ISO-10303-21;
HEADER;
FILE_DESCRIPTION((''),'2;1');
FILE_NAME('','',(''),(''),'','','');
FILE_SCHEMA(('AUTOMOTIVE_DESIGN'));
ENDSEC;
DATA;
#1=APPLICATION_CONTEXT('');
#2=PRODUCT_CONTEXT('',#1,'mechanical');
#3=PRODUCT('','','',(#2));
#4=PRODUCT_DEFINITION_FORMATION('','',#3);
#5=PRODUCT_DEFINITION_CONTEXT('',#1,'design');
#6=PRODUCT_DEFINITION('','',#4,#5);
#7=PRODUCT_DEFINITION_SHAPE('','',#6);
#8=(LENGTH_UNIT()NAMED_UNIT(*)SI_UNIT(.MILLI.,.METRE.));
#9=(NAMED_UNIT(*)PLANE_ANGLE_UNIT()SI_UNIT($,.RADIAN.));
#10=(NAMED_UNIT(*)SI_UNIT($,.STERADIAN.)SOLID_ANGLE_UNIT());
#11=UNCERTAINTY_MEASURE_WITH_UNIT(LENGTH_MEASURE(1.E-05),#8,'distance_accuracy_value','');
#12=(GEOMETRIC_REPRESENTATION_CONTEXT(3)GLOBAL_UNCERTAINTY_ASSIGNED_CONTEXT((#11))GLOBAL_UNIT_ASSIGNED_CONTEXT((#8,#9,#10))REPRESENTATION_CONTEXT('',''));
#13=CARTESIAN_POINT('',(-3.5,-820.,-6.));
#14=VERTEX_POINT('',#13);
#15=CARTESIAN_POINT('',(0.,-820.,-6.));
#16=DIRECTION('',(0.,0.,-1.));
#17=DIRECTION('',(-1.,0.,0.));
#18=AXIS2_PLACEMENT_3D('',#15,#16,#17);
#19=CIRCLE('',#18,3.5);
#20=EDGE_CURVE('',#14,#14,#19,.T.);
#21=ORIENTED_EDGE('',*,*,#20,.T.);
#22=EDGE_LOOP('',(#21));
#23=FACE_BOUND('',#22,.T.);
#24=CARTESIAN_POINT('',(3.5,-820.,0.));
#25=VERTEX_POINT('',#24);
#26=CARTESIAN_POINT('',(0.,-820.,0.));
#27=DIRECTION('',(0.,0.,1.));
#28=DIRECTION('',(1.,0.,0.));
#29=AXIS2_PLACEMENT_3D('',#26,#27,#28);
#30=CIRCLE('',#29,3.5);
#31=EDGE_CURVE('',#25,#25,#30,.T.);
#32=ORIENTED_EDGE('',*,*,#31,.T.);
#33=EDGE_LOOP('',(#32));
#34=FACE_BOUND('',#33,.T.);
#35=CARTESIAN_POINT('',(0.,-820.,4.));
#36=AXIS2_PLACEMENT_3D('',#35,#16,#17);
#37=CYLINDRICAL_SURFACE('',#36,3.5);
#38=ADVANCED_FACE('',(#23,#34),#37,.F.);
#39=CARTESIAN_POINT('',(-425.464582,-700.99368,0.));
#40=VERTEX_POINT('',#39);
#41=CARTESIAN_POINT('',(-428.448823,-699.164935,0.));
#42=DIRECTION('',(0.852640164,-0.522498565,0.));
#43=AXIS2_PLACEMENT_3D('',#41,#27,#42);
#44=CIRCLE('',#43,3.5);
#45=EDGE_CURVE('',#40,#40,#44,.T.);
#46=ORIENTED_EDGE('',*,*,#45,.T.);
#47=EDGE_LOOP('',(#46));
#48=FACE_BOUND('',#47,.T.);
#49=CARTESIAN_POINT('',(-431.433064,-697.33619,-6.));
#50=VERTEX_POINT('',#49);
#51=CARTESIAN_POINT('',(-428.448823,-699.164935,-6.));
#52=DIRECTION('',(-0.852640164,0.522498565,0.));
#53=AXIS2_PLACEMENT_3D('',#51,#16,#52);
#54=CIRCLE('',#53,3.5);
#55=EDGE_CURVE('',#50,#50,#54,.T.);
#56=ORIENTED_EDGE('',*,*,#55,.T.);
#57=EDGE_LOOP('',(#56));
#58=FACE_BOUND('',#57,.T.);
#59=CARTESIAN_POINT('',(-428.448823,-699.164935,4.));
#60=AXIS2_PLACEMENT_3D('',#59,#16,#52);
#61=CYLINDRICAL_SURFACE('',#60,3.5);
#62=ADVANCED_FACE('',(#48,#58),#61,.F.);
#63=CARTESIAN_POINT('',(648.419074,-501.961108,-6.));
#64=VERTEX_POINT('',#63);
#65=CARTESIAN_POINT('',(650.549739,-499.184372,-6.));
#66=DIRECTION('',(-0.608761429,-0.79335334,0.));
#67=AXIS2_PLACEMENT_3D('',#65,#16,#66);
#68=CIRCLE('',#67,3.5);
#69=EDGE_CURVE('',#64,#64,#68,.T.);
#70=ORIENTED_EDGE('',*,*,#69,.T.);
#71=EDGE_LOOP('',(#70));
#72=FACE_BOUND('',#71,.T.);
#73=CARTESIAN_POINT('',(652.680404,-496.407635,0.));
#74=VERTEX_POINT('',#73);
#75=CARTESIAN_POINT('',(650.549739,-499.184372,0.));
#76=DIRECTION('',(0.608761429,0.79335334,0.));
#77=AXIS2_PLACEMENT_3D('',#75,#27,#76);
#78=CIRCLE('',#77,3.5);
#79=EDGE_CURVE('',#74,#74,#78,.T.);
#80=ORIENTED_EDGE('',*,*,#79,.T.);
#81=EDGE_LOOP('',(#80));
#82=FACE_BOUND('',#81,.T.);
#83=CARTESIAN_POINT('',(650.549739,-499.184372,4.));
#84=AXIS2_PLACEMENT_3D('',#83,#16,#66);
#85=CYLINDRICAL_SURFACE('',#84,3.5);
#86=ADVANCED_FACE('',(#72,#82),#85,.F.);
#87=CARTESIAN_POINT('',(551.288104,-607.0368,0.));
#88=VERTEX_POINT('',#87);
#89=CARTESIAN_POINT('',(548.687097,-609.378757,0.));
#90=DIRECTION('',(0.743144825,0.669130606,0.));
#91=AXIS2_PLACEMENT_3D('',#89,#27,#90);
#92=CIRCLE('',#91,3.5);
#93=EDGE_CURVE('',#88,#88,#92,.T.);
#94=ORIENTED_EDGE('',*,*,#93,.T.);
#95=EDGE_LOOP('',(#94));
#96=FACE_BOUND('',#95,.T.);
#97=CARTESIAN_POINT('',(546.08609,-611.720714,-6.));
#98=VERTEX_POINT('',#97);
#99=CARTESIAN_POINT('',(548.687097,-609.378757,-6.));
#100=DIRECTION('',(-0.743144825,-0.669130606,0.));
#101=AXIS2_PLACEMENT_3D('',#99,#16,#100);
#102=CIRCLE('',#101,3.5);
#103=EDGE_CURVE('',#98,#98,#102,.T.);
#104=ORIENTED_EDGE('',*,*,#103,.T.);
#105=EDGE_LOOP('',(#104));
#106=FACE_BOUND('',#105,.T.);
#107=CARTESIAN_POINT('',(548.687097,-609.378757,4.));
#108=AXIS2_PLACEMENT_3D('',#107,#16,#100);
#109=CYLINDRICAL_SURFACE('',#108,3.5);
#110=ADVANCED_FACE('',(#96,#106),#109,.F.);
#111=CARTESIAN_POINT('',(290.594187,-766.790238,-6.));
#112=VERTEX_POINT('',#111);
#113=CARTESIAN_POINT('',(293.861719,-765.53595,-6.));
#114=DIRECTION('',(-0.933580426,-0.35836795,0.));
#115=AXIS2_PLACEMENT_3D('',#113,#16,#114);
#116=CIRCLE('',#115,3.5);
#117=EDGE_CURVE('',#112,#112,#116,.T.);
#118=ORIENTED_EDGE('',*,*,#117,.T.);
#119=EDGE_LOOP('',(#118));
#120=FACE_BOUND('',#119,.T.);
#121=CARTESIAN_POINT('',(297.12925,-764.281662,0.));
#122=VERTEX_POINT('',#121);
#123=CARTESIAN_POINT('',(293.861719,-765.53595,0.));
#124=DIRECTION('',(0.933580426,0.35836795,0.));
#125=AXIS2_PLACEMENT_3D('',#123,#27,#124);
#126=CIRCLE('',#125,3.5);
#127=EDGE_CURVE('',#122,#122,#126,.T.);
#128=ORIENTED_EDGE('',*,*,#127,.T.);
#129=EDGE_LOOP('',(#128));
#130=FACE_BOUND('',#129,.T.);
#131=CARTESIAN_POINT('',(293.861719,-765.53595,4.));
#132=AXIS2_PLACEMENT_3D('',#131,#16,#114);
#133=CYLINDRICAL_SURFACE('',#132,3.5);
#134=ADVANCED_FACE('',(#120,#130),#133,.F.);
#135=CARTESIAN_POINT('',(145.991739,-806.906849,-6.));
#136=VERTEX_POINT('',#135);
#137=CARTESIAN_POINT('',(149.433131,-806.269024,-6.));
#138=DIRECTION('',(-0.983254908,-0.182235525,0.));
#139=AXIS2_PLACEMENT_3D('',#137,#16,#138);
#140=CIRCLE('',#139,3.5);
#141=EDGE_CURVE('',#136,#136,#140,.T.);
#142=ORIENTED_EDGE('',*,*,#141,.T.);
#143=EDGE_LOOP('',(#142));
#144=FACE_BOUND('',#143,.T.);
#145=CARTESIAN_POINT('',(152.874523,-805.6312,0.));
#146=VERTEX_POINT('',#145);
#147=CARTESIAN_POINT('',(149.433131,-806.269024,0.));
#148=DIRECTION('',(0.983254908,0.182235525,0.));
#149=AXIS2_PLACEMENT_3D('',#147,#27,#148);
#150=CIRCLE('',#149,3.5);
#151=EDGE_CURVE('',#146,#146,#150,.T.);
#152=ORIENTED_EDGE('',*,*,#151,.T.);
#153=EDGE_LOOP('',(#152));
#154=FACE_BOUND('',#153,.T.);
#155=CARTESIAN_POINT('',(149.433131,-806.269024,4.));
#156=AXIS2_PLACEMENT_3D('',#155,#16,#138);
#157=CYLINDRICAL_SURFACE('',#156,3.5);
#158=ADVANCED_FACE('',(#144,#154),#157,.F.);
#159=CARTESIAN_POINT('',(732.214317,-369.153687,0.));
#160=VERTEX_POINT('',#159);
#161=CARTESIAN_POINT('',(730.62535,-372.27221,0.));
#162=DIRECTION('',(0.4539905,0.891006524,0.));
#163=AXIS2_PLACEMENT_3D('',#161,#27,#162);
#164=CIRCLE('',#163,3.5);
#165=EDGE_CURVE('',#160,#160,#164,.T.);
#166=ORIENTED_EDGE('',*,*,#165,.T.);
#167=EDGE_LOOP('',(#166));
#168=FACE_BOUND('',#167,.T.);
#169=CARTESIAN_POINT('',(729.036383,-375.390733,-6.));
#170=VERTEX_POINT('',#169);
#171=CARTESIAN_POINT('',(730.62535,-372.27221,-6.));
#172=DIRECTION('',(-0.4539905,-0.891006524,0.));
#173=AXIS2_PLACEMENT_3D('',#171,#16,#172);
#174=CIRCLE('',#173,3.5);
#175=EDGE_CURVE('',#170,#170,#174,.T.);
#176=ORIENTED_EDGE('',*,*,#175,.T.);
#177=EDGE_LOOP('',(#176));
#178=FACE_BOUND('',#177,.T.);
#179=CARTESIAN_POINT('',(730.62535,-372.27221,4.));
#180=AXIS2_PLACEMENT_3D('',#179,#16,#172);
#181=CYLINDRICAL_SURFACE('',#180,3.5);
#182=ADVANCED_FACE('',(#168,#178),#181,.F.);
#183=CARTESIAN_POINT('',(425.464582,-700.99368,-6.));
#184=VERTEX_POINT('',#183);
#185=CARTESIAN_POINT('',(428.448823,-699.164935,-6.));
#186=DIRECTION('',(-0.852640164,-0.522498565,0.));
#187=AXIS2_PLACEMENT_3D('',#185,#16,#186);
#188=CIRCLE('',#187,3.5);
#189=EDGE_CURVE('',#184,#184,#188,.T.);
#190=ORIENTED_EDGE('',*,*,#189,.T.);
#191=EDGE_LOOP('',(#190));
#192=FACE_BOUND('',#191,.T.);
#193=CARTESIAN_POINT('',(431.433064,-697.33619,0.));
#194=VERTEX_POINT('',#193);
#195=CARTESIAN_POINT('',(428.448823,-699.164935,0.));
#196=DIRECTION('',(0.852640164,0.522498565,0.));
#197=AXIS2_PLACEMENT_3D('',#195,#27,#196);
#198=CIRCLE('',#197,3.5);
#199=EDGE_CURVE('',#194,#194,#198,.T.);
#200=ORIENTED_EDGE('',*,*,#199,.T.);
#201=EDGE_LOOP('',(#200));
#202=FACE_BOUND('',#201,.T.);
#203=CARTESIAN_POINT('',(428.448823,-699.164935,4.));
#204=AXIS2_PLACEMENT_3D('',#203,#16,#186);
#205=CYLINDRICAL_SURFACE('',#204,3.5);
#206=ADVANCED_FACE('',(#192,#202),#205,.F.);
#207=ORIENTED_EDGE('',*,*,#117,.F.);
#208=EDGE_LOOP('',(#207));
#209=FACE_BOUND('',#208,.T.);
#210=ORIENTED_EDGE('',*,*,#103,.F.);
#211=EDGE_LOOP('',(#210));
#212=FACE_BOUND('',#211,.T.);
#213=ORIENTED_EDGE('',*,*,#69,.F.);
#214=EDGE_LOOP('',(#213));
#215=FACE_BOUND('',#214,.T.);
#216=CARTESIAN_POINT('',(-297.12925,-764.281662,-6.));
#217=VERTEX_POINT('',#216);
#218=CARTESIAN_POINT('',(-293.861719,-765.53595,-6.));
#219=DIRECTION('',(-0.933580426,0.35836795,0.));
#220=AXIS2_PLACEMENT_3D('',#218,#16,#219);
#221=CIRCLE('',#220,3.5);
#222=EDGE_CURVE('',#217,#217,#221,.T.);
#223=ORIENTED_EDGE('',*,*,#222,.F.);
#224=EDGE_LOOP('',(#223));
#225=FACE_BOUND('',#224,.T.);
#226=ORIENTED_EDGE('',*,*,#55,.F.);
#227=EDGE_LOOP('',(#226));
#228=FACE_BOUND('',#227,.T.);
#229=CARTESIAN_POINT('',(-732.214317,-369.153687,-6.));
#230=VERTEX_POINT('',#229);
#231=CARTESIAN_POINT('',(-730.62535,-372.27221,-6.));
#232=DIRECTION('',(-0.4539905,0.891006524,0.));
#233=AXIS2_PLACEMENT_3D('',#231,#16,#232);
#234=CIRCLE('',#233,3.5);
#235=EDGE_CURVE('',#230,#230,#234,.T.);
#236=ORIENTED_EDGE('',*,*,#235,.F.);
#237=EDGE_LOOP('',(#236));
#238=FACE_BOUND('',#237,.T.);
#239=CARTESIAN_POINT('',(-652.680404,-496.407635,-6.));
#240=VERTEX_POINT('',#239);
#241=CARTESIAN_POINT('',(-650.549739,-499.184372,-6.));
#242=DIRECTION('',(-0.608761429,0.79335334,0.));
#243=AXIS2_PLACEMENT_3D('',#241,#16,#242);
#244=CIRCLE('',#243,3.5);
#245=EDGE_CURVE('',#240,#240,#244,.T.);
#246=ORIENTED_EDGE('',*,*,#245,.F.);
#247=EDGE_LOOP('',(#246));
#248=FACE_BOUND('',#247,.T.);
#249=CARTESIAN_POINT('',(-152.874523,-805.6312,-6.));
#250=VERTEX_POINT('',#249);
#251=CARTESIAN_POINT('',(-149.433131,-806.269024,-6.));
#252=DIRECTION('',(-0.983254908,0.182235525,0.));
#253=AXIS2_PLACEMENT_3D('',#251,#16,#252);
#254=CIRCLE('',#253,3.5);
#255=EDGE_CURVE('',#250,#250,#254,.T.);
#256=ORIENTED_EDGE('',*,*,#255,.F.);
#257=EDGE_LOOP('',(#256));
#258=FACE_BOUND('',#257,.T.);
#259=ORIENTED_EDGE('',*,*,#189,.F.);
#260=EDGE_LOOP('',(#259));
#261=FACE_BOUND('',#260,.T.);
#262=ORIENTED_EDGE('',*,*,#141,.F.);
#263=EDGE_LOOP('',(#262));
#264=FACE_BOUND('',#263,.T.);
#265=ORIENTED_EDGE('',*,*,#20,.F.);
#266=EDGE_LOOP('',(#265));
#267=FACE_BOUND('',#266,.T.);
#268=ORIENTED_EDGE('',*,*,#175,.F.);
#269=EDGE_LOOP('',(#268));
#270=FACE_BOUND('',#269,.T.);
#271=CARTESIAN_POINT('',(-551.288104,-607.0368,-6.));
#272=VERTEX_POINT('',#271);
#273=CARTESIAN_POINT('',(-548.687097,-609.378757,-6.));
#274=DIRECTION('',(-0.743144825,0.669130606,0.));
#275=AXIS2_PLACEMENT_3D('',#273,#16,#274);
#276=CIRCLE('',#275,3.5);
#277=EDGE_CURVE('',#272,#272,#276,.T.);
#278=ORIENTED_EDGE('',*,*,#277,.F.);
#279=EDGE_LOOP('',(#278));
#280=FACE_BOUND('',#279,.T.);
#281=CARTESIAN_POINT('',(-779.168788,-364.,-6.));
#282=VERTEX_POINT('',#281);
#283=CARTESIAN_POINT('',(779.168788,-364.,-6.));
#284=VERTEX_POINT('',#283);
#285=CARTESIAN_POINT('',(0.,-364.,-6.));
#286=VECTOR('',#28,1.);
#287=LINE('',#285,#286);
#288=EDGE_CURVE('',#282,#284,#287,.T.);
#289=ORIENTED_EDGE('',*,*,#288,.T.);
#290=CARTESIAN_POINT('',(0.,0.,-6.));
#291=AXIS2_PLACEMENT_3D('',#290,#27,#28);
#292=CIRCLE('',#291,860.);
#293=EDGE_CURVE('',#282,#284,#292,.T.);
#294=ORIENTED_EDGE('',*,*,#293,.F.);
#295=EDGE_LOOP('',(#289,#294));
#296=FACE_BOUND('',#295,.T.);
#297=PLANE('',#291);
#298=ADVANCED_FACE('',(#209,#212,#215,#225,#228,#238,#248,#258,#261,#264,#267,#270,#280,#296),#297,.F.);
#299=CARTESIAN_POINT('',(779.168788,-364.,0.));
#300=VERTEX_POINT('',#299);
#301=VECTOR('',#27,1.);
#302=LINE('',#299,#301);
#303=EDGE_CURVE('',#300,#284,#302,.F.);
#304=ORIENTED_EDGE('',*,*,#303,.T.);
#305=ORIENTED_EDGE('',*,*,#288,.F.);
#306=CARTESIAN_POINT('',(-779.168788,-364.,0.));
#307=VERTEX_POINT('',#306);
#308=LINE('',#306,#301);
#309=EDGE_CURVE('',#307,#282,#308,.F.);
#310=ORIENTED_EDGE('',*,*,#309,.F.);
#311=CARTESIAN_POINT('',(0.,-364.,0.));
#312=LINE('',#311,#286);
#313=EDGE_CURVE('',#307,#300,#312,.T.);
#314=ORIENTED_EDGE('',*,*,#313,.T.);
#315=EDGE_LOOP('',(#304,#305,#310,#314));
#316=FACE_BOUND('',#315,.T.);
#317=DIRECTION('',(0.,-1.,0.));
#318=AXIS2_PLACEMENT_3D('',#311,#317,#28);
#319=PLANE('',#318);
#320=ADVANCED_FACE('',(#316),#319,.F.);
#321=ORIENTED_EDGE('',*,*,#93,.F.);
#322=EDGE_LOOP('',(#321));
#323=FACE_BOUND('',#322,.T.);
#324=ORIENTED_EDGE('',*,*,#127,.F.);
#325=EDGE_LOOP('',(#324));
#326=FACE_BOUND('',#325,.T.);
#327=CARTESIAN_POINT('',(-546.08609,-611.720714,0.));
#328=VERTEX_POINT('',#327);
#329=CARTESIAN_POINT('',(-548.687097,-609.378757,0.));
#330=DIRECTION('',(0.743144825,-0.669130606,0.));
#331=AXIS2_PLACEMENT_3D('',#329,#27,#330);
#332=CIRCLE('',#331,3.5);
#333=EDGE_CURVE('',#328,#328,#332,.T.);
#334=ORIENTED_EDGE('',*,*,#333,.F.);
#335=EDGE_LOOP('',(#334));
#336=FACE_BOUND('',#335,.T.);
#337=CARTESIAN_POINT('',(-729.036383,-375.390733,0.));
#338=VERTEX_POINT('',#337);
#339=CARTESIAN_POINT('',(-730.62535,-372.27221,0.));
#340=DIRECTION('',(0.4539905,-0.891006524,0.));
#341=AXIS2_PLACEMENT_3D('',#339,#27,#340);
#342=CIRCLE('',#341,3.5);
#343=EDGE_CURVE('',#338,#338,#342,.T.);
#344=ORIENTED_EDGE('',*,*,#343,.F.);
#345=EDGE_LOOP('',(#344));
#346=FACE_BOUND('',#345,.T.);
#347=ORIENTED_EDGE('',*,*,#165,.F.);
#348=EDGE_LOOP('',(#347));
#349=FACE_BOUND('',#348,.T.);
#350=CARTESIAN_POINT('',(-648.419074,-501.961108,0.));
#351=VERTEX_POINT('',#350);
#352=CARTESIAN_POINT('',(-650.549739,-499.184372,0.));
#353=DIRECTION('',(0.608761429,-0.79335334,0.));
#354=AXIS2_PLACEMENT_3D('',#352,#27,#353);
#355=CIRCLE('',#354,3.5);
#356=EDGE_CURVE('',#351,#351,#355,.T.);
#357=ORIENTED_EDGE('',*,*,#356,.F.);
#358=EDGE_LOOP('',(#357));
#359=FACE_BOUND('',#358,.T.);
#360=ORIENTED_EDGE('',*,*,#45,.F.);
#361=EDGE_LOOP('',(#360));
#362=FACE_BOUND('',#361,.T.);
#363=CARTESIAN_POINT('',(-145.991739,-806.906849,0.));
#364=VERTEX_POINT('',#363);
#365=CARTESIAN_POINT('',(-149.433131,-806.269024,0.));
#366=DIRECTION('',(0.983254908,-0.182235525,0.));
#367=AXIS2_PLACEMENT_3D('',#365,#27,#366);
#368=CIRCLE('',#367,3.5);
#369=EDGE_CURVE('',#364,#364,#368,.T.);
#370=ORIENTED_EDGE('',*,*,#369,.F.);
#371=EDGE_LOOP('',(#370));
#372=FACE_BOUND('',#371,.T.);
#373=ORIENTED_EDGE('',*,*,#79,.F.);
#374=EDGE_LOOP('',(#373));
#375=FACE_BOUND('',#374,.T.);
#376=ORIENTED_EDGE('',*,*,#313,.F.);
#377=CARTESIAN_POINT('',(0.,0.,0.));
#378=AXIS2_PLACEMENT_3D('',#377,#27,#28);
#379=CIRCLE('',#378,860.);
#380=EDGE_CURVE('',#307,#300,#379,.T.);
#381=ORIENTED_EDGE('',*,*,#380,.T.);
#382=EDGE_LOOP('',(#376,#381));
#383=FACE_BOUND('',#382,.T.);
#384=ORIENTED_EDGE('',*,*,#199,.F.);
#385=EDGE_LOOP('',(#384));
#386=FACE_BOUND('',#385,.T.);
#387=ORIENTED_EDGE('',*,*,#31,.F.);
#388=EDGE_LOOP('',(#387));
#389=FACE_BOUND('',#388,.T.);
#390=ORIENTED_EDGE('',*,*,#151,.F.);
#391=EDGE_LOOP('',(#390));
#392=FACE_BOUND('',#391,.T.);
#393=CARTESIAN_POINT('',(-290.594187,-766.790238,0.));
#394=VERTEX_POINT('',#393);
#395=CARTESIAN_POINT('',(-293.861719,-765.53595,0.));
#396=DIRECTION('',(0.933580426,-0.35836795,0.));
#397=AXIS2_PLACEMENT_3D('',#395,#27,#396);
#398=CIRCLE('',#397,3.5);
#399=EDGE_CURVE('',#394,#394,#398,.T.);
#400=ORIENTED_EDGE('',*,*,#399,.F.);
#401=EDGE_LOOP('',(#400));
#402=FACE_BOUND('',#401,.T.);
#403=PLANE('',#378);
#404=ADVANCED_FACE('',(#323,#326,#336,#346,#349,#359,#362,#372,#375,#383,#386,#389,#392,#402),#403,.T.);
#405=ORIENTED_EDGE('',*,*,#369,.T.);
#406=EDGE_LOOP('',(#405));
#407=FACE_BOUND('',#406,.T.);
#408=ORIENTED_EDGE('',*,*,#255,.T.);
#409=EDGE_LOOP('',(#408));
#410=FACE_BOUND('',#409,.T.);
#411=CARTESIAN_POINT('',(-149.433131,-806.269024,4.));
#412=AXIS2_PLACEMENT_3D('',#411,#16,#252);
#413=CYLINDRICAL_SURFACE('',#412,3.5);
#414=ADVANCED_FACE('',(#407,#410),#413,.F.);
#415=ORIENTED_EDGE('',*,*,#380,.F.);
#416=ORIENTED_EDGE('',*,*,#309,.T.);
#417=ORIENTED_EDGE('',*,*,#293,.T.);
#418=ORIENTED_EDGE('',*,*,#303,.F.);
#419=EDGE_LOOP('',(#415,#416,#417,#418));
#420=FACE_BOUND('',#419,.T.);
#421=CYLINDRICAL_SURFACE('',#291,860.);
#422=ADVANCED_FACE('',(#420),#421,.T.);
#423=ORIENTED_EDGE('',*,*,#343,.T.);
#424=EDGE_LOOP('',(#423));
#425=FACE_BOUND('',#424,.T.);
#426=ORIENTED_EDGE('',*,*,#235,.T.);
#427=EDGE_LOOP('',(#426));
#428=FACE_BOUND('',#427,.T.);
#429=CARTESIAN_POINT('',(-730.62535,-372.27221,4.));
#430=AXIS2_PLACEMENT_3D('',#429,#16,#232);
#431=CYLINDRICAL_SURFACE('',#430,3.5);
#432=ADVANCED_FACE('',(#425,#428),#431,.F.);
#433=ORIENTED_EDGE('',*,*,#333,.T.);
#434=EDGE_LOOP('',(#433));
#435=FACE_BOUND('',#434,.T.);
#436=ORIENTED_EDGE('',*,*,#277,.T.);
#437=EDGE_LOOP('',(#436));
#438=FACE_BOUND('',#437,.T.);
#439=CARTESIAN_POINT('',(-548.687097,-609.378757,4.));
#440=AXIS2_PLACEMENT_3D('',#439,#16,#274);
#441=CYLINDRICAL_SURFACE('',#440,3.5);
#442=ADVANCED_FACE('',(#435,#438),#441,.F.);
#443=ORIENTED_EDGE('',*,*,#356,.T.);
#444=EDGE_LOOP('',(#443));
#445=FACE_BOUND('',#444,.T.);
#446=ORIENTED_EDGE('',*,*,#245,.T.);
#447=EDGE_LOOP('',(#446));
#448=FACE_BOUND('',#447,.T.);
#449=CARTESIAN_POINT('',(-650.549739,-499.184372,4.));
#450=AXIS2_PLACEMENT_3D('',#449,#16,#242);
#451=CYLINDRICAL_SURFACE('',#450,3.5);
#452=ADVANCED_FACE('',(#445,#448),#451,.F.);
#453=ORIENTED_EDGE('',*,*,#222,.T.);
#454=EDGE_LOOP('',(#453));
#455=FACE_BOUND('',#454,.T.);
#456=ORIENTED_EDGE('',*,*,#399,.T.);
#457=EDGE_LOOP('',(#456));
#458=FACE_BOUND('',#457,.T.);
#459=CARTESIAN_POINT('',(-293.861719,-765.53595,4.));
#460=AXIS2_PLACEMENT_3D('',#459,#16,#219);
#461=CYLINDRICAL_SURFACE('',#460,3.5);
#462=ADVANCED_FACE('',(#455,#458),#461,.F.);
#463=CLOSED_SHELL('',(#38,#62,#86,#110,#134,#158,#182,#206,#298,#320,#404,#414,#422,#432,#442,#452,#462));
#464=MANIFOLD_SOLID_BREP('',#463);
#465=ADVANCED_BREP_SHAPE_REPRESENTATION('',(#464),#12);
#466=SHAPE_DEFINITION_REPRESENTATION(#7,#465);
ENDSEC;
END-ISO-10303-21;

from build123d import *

# Parameters (mm, degrees)
BASE_FLANGE1_DEPTH              = 6
SKETCH2_W                       = 1968.518691842
SKETCH2_H                       = 782.123286761
CUT_EXTRUDE1_DEPTH              = 10
SKETCH3_R                       = 3.5
CUT_EXTRUDE2_DEPTH              = 10
CIRPATTERN4_COUNT               = 7
CIRPATTERN4_ANGLE               = 63
CIRPATTERN4_THE_OTHER_WAY_COUNT = 7
CIRPATTERN4_THE_OTHER_WAY_ANGLE = 63


# Sheet-metal steps are written as plain solids
with BuildPart() as part:
    # Sketch1 → Base-Flange1 (new body)
    with BuildSketch(Plane.XY):
        with BuildLine():
            Line((859.985464993, -5), (-859.985464993, -5))
            ThreePointArc((-859.985464993, -5), (0, -860), (859.985464993, -5))
        make_face()
    extrude(amount=-BASE_FLANGE1_DEPTH)

    # Sketch2 → Cut-Extrude1 (cut)
    with BuildSketch(Plane.XY):
        with Locations((10.387961435, 27.061643381)):
            Rectangle(SKETCH2_W, SKETCH2_H)
    extrude(amount=-CUT_EXTRUDE1_DEPTH, mode=Mode.SUBTRACT)

    # Sketch3 → Cut-Extrude2 (cut)
    with BuildSketch(Plane(origin=(0, 0, -6), x_dir=(-1, 0, 0), z_dir=(0, 0, -1))):
        with Locations((0, -820)):
            Circle(SKETCH3_R)
    cut_extrude2 = extrude(amount=-CUT_EXTRUDE2_DEPTH, mode=Mode.SUBTRACT)

    # CirPattern4: Cut-Extrude2 ×7 about axis
    cirpattern4_axis = Axis((0, 0, 0), (0, 0, 1))
    for i in range(1, CIRPATTERN4_COUNT):
        add(cut_extrude2.rotate(cirpattern4_axis, i * CIRPATTERN4_ANGLE / (CIRPATTERN4_COUNT - 1)), mode=Mode.SUBTRACT)

    # CirPattern4 the other way: Cut-Extrude2 ×7 about axis
    cirpattern4_the_other_way_axis = Axis((0, 0, 0), (0, 0, -1))
    for i in range(1, CIRPATTERN4_THE_OTHER_WAY_COUNT):
        add(cut_extrude2.rotate(cirpattern4_the_other_way_axis, i * CIRPATTERN4_THE_OTHER_WAY_ANGLE / (CIRPATTERN4_THE_OTHER_WAY_COUNT - 1)), mode=Mode.SUBTRACT)


solid = part.part
